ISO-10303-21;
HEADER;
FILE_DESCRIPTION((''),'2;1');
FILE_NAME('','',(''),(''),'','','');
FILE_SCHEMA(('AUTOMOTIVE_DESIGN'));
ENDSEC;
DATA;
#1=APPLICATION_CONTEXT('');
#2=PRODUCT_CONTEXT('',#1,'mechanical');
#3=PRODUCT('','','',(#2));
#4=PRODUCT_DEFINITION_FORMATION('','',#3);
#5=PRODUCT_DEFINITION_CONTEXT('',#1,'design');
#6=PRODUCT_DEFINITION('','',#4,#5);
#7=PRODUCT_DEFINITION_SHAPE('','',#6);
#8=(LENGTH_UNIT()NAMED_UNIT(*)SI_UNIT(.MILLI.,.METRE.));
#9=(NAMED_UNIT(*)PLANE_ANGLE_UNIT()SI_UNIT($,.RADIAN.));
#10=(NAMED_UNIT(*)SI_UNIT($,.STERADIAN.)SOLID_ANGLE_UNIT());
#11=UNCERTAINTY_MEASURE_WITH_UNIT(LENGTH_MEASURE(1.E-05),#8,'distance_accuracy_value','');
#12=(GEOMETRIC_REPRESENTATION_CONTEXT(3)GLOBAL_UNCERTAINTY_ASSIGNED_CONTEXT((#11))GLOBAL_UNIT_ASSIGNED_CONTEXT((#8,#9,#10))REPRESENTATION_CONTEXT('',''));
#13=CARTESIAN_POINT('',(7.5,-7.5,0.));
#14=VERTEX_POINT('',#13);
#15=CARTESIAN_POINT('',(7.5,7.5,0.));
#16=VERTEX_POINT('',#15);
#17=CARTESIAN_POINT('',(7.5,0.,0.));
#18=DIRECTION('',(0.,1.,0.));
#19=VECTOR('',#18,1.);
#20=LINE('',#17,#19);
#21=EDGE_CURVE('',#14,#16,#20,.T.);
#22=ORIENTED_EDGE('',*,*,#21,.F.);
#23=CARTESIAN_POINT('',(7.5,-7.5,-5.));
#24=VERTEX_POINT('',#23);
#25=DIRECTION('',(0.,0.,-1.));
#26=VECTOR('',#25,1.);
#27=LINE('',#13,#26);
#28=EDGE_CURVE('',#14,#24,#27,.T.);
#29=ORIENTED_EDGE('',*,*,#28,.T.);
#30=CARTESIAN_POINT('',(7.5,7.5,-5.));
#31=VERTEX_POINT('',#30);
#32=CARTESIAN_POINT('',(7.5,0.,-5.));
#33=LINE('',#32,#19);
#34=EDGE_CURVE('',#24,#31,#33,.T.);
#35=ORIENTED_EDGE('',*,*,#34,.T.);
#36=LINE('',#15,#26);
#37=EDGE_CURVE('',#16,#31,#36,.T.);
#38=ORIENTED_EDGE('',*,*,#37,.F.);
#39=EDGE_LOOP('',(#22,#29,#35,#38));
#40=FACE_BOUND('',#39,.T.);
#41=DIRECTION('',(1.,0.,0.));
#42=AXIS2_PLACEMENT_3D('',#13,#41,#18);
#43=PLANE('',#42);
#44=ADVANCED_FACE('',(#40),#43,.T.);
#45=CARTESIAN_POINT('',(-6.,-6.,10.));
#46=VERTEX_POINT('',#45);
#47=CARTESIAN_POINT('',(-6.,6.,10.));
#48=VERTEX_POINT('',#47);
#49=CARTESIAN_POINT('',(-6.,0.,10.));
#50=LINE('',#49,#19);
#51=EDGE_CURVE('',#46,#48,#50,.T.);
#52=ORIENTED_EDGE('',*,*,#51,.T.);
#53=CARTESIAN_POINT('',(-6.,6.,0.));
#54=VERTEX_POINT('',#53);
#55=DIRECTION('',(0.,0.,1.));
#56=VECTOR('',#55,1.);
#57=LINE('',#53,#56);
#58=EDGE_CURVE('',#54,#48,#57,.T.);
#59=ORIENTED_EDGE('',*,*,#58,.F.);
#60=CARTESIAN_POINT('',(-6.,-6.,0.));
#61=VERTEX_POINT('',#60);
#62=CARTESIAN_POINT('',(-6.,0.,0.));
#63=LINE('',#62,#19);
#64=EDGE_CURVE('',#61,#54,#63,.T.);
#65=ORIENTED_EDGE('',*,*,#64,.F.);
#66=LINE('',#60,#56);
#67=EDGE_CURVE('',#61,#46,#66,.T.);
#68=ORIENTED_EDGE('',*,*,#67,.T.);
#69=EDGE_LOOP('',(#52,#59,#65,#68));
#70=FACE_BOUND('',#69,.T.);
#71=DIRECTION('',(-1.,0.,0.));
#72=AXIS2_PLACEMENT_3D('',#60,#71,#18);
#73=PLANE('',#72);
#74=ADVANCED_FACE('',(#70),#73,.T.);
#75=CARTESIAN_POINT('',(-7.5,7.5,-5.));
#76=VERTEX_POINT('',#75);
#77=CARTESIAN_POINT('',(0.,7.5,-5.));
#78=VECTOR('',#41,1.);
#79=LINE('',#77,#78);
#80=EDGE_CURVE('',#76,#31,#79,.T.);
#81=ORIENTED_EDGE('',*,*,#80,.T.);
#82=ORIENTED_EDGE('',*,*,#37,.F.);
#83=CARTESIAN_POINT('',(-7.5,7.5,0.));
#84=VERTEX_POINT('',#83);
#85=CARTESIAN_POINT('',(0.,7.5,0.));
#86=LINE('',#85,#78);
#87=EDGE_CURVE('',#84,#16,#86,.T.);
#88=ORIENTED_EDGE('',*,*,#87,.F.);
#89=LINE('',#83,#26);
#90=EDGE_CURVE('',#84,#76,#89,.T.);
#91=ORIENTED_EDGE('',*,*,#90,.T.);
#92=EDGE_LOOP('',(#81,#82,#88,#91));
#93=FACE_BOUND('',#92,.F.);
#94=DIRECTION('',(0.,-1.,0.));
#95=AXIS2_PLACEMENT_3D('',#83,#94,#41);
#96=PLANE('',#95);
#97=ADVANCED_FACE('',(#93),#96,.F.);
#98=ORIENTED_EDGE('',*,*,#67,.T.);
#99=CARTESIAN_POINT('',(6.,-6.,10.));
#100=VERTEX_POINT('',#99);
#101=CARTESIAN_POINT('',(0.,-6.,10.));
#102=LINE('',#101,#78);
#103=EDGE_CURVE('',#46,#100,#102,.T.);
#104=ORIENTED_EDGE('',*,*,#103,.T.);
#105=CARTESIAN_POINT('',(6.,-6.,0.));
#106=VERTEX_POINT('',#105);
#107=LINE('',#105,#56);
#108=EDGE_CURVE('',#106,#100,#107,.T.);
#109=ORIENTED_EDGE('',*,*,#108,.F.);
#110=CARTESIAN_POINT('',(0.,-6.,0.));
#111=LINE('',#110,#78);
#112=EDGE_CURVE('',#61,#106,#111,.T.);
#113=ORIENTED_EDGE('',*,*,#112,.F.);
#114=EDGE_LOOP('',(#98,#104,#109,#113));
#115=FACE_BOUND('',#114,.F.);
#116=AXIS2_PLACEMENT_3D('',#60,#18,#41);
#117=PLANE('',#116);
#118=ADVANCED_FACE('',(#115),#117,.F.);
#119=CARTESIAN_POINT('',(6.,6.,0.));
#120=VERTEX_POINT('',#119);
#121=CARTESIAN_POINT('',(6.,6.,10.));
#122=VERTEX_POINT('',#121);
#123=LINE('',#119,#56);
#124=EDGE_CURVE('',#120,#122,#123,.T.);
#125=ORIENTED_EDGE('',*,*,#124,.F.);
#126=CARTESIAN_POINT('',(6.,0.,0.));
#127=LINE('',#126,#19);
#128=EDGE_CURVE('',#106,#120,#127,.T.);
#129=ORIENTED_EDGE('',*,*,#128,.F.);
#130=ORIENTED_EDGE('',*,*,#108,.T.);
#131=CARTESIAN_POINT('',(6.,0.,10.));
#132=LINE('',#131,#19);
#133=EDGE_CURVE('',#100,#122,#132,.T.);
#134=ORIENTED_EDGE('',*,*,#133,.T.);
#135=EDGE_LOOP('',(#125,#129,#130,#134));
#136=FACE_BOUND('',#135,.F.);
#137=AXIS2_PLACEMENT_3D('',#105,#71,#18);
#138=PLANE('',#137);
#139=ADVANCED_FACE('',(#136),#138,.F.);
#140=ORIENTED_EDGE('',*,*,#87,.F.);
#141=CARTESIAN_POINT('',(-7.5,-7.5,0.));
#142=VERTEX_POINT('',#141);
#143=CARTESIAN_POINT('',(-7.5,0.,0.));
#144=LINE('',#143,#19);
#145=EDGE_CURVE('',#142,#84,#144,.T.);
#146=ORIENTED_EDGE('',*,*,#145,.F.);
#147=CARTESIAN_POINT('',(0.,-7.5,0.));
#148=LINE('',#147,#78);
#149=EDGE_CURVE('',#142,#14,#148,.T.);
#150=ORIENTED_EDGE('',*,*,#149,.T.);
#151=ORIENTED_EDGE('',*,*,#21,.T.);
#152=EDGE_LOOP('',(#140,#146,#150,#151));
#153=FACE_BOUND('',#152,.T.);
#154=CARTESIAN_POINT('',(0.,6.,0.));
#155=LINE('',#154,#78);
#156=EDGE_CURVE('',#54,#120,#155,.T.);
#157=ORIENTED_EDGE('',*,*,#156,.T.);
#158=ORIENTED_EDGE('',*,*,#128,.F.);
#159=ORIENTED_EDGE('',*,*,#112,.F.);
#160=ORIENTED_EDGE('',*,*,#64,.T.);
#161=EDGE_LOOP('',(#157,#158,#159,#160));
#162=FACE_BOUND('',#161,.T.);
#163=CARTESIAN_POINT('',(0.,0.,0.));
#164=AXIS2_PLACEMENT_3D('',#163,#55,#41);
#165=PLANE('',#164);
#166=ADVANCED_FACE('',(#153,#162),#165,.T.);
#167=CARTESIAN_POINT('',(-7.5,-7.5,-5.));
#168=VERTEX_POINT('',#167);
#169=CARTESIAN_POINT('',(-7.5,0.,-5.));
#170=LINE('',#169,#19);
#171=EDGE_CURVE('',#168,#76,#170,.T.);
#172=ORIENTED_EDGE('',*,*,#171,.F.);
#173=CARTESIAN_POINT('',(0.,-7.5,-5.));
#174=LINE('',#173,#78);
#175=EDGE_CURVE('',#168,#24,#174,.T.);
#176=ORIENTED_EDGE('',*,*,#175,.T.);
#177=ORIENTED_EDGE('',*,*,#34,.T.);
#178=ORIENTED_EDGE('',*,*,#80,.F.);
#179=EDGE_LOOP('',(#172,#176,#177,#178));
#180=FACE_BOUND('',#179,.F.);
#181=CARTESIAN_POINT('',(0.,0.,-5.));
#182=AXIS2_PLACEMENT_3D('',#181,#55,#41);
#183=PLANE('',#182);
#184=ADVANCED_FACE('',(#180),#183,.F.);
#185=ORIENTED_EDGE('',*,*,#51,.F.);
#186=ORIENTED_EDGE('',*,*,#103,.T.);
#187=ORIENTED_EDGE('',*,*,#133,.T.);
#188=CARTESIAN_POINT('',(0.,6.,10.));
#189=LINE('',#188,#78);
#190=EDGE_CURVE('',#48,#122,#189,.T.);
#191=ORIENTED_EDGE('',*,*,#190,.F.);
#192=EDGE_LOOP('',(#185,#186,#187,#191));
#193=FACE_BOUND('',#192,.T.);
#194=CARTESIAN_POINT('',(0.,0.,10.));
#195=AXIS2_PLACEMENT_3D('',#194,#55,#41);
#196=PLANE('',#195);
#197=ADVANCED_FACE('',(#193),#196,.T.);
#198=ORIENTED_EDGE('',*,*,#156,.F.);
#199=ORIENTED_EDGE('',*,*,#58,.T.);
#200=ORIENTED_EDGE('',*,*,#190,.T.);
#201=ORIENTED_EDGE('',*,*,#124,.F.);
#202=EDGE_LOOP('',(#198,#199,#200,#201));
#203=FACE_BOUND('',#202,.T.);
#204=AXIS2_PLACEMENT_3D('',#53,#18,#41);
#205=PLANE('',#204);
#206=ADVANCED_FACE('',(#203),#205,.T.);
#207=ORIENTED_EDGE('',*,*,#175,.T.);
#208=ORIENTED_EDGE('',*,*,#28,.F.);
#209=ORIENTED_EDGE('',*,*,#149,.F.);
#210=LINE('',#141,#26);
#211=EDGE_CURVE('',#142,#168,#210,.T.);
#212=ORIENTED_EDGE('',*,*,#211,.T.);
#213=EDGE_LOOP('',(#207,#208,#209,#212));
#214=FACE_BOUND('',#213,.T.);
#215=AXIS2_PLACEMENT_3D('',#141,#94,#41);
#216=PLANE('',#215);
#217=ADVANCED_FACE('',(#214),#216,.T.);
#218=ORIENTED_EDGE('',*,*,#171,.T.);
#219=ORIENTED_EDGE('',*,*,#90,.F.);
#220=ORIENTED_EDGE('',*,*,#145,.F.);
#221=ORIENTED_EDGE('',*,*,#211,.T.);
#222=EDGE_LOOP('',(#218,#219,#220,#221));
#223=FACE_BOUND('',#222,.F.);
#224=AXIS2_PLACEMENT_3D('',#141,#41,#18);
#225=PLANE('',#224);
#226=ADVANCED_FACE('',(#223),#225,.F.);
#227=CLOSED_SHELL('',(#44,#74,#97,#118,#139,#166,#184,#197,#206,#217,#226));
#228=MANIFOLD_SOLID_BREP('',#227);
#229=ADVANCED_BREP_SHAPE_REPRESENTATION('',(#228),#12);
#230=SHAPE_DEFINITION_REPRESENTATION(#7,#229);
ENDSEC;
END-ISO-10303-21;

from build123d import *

# Parameters (mm, degrees)
F0_W     = 15
F0_H     = 15
F0_W_2   = 12
F0_H_2   = 12
F1_DEPTH = 5
F2_DEPTH = 10


with BuildPart() as f1:
    # F0 (on Top) → F1 (new body)
    with BuildSketch(Plane.XY):
        Rectangle(F0_W, F0_H)
        Rectangle(F0_W_2, F0_H_2, mode=Mode.SUBTRACT)
        Rectangle(F0_W_2, F0_H_2)
    extrude(amount=-F1_DEPTH)

    # F0 (on Top) → F2 (join)
    with BuildSketch(Plane.XY):
        Rectangle(F0_W_2, F0_H_2)
    extrude(amount=F2_DEPTH)


solid = f1.part
